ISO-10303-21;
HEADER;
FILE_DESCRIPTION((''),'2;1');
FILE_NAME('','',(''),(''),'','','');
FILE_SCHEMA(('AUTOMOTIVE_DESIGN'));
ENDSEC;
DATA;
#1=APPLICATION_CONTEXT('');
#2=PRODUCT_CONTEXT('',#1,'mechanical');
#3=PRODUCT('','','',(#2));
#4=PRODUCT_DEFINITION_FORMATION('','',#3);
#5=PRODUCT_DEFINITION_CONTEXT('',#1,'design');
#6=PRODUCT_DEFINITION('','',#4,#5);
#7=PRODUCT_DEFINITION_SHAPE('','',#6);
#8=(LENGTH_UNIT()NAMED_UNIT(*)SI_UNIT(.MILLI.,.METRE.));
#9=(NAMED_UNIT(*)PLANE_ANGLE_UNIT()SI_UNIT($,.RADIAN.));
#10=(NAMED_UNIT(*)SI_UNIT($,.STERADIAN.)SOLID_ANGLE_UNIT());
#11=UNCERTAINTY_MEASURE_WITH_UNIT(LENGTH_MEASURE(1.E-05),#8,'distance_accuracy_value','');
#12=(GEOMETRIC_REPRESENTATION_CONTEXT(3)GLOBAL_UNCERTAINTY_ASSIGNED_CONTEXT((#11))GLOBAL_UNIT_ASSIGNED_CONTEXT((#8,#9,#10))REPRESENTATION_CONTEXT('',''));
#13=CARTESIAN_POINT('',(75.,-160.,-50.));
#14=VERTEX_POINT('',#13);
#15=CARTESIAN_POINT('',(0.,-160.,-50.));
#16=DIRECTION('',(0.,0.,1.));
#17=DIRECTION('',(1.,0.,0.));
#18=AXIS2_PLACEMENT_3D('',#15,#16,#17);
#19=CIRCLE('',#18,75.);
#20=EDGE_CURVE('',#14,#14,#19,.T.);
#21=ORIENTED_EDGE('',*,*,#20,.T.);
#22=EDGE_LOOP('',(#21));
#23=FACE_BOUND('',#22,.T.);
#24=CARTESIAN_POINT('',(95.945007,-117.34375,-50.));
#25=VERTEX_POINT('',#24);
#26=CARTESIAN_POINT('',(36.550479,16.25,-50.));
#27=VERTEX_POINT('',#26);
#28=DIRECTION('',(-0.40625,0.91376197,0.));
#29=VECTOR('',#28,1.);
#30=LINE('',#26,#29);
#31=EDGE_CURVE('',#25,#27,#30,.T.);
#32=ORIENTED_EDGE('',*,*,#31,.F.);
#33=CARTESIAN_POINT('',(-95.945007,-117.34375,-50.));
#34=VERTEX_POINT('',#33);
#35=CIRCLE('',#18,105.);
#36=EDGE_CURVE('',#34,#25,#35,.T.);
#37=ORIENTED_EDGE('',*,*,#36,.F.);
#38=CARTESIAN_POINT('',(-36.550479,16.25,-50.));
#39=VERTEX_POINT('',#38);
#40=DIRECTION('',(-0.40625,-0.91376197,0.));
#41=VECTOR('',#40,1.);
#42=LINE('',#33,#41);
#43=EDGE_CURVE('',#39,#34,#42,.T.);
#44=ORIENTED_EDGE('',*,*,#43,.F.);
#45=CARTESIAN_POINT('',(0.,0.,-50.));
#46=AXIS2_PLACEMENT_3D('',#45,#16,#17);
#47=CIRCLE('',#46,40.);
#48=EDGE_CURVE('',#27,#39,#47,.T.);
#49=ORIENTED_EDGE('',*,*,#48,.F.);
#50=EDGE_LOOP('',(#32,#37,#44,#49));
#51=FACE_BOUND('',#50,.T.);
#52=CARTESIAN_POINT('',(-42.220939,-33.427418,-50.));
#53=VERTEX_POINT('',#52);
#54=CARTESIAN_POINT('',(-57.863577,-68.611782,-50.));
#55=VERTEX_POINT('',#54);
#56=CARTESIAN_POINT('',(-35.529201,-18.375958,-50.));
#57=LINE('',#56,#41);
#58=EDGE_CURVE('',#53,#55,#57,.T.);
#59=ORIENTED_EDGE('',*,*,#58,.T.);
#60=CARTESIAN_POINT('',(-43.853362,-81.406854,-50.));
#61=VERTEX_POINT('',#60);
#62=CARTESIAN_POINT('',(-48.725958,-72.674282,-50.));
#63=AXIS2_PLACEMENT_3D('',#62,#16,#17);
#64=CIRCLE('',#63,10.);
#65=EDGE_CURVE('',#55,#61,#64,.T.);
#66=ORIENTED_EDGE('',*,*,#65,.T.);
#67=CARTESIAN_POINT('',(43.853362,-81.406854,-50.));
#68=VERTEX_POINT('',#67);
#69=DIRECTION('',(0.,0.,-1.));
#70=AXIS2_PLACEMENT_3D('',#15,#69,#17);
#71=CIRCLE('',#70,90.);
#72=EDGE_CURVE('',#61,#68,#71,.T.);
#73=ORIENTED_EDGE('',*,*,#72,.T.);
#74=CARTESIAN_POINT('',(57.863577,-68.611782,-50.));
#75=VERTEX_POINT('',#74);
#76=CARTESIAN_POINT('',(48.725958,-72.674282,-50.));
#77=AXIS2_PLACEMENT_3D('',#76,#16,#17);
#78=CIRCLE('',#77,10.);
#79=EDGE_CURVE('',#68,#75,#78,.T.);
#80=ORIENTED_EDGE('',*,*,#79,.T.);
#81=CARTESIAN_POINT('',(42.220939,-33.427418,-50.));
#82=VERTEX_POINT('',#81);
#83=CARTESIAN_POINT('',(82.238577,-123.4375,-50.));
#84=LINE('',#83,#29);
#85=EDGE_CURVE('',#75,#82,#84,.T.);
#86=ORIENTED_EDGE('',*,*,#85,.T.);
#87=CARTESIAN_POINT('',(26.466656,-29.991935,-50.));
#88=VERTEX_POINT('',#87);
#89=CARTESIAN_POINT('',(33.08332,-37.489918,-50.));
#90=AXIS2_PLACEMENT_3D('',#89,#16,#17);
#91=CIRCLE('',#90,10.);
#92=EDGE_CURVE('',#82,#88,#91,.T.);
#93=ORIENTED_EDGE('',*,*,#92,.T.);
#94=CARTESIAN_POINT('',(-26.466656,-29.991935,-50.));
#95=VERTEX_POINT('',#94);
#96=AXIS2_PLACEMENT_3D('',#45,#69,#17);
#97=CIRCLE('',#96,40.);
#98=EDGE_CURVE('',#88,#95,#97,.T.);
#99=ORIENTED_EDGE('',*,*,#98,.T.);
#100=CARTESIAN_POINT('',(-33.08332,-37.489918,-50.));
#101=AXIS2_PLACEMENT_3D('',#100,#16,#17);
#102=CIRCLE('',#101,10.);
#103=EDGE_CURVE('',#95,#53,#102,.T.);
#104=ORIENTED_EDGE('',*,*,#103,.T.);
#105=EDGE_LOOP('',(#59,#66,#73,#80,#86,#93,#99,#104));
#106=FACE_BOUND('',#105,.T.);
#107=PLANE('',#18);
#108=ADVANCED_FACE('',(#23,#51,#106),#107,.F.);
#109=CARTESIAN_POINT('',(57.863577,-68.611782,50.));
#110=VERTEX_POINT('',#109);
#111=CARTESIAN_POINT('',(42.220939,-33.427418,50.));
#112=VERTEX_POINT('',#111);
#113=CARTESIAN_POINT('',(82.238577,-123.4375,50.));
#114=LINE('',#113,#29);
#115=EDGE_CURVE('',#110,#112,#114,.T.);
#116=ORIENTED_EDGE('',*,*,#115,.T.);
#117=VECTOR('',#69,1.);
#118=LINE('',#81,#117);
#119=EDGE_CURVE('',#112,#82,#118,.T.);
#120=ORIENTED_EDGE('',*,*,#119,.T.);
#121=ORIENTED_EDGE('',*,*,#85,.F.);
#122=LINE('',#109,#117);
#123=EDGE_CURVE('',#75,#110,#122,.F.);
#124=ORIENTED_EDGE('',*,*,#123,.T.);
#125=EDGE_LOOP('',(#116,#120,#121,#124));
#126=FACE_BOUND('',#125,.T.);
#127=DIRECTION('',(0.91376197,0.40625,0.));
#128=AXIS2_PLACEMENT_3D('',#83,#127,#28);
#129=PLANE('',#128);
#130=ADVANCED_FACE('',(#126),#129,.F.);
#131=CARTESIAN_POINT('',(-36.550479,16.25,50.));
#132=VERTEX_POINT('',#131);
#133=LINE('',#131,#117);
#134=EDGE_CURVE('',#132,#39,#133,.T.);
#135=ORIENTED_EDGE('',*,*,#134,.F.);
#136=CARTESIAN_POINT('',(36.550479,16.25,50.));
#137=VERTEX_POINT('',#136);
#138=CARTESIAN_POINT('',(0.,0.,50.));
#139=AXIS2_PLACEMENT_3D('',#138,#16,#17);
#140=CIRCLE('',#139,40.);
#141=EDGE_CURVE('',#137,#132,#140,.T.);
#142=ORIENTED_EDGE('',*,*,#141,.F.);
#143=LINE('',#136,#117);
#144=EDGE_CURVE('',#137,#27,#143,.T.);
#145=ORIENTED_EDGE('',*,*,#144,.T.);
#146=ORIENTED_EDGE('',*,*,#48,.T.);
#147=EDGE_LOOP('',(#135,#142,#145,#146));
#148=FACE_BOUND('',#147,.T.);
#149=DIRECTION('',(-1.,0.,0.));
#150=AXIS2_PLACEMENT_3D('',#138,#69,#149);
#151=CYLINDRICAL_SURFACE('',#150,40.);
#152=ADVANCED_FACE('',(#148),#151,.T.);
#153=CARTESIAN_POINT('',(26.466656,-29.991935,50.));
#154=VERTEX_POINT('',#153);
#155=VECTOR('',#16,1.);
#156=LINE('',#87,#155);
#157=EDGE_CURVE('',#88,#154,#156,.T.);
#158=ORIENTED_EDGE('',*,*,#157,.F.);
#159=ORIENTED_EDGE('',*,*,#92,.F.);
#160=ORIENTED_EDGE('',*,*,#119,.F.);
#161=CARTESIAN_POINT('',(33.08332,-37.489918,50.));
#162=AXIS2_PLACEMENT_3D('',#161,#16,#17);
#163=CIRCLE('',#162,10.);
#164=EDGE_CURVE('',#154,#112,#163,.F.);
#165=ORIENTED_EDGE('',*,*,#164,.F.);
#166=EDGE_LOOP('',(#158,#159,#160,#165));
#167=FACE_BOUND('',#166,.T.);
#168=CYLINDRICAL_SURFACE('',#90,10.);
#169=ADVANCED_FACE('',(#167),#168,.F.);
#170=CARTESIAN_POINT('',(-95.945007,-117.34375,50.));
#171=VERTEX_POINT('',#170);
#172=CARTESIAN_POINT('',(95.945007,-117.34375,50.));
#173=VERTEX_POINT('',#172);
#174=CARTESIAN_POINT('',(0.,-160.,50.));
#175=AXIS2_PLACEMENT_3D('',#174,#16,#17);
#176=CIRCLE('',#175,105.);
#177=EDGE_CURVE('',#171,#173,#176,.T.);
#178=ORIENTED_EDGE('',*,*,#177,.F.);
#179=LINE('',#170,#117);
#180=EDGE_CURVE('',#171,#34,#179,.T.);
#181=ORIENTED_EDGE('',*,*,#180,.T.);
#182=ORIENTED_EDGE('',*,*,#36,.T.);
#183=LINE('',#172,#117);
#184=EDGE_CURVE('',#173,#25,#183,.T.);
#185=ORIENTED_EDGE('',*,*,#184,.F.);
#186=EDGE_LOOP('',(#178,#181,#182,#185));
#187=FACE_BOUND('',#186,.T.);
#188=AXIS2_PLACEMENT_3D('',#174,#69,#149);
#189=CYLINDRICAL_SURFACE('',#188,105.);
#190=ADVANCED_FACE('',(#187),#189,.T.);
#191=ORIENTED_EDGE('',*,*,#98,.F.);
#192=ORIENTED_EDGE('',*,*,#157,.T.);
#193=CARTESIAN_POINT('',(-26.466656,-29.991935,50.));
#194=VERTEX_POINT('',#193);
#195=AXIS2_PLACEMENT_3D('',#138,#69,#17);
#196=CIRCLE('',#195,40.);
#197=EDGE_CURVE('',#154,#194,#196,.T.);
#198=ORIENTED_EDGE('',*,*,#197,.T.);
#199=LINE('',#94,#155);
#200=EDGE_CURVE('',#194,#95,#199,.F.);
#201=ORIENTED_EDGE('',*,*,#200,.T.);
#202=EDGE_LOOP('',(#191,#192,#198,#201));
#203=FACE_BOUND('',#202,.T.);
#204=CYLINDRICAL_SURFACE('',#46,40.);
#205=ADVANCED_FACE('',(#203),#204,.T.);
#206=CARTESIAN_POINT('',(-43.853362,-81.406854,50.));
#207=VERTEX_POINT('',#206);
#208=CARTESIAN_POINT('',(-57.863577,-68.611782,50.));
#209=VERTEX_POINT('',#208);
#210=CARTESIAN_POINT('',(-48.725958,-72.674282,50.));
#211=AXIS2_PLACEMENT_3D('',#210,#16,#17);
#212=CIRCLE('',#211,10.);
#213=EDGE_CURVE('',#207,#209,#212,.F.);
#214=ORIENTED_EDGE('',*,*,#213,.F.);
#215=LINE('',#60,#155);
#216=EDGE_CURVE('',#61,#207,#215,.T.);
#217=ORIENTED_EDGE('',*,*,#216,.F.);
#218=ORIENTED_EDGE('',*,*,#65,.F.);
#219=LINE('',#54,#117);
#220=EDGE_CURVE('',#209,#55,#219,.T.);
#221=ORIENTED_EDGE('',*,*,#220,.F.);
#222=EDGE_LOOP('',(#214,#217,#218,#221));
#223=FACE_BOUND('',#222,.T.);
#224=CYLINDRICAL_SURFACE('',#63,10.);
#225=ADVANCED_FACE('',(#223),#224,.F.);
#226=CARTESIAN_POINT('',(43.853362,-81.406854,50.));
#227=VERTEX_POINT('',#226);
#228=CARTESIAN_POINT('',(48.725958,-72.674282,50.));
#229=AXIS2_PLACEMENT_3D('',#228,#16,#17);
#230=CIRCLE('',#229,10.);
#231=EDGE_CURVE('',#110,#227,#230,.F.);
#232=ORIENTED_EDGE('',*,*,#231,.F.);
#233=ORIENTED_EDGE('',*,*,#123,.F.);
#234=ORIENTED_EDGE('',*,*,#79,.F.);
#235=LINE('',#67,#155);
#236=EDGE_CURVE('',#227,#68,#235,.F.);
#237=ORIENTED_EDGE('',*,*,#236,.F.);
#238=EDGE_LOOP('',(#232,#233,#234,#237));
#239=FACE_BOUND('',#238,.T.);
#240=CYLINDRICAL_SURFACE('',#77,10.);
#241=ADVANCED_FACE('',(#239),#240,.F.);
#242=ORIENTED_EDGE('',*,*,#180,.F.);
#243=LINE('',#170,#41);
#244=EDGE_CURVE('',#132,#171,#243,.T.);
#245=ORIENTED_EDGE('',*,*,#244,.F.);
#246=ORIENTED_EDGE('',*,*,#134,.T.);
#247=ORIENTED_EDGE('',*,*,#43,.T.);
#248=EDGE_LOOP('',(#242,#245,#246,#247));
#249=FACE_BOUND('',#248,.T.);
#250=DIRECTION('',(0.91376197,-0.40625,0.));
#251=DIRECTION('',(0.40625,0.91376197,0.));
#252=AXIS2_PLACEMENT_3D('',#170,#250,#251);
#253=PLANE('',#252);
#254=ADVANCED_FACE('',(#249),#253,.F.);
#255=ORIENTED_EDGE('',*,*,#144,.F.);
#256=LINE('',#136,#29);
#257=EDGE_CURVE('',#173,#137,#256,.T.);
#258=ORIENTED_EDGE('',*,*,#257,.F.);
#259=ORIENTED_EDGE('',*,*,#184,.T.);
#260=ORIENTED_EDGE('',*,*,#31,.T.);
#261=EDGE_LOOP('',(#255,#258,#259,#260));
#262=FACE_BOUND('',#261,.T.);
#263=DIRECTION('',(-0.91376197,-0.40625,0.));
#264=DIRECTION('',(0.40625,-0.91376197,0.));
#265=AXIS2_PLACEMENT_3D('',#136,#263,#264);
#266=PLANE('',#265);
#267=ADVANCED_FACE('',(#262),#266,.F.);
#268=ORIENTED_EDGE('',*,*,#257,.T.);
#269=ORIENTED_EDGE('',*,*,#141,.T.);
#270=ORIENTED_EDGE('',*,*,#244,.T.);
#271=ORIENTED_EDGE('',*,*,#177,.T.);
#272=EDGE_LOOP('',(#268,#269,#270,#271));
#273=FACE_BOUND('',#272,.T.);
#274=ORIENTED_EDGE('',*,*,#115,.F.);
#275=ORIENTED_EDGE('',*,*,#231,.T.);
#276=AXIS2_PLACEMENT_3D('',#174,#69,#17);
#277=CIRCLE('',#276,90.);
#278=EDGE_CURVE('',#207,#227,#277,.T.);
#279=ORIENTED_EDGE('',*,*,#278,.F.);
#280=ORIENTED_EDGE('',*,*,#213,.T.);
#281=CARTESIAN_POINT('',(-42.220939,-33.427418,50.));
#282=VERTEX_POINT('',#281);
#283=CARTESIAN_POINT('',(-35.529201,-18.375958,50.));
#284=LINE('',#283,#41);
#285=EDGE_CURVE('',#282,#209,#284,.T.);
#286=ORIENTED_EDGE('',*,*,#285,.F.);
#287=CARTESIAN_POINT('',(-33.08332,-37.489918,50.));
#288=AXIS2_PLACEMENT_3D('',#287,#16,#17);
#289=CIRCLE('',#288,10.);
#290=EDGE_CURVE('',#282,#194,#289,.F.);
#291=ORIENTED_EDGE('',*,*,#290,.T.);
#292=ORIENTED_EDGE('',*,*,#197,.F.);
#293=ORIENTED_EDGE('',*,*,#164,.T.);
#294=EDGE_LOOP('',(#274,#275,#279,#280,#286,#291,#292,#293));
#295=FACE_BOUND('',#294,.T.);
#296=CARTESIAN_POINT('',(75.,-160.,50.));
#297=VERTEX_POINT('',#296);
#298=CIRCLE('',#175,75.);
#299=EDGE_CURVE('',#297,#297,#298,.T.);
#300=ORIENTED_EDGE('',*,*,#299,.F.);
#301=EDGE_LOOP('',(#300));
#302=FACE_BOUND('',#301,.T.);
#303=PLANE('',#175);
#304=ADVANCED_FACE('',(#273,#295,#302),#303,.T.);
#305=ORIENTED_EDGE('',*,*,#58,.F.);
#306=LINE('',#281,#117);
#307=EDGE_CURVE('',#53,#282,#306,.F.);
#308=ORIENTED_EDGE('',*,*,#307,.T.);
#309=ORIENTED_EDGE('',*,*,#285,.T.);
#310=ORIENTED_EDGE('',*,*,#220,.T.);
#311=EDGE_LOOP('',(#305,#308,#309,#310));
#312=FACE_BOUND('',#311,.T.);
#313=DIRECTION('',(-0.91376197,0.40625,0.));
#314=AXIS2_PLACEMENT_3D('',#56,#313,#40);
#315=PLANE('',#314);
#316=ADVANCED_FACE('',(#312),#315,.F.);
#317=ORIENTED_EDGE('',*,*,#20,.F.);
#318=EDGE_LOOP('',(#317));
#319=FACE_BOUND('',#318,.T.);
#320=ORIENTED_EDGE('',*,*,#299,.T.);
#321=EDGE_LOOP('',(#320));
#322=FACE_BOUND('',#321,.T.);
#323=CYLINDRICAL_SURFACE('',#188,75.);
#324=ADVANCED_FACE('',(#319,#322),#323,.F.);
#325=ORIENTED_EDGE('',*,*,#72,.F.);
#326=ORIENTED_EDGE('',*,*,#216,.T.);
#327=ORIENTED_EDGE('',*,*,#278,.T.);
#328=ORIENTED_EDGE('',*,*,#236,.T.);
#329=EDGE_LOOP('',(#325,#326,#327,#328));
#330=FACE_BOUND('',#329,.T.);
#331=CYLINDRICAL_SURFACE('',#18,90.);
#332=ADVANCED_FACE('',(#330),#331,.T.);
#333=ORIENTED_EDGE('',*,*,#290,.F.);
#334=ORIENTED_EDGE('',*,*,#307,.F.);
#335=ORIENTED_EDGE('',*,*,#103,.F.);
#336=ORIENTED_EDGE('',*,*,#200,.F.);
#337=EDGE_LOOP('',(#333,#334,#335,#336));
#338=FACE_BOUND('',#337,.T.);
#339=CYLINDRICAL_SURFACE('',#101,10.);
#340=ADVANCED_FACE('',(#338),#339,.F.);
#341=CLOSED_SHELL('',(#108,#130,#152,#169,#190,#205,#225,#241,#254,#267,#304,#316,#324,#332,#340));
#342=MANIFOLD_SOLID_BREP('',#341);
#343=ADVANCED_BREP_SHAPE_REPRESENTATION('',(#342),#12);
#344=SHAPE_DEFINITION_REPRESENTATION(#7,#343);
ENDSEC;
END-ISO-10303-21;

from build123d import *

# Parameters (mm, degrees)
SKETCH1_R               = 75
BOSS_EXTRUDE1_DEPTH     = 50
CUT_EXTRUDE1_DEPTH      = 290.39592257
CUT_EXTRUDE1_DEPTH_BACK = 290.39592257
FILLET1_START           = -50
FILLET1_DEPTH           = 100


with BuildPart() as part:
    # Sketch1 → Boss-Extrude1 (new, symmetric)
    with BuildSketch(Plane.XY):
        with BuildLine():
            Line((-95.945006832, -117.34375), (-36.550478793, 16.25))
            ThreePointArc((-36.550478793, 16.25), (0, 40), (36.550478793, 16.25))
            Line((36.550478793, 16.25), (95.945006832, -117.34375))
            ThreePointArc((95.945006832, -117.34375), (0, -265), (-95.945006832, -117.34375))
        make_face()
        with Locations((0, -160)):
            Circle(SKETCH1_R, mode=Mode.SUBTRACT)
    extrude(amount=BOSS_EXTRUDE1_DEPTH, both=True)

    # Sketch2 → Cut-Extrude1 (cut, two sides: drawn at the far end of the back side and taken through both)
    with BuildSketch(Plane.XY.offset(-CUT_EXTRUDE1_DEPTH_BACK)):
        with BuildLine():
            Line((-35.52920143, -18.375958363), (-82.238577284, -123.4375))
            ThreePointArc((-82.238577284, -123.4375), (0, -70), (82.238577284, -123.4375))
            Line((82.238577284, -123.4375), (35.52920143, -18.375958363))
            ThreePointArc((35.52920143, -18.375958363), (0, -40), (-35.52920143, -18.375958363))
        make_face()
    extrude(amount=CUT_EXTRUDE1_DEPTH + CUT_EXTRUDE1_DEPTH_BACK, mode=Mode.SUBTRACT)

    # Fillet1: read off the stored shape, not the designer's step
    # Fillet1 outline → Fillet1 (add)
    with BuildSketch(Plane.XY.offset(FILLET1_START)):
        with BuildLine():
            ThreePointArc((-42.220939274, -33.427418189), (-35.213916082, -27.719526256), (-26.466655661, -29.991934551))
            ThreePointArc((-26.466655661, -29.991934551), (-31.537347698, -24.604790188), (-35.52920143, -18.375958363))
            Line((-35.52920143, -18.375958363), (-42.220939274, -33.427418189))
        make_face()
        with BuildLine():
            ThreePointArc((35.52920143, -18.375958363), (31.537347698, -24.604790188), (26.466655661, -29.991934551))
            ThreePointArc((26.466655661, -29.991934551), (35.213916082, -27.719526256), (42.220939274, -33.427418189))
            Line((42.220939274, -33.427418189), (35.52920143, -18.375958363))
        make_face()
        with BuildLine():
            ThreePointArc((-43.853361827, -81.406853629), (-55.469552548, -80.058313703), (-57.863577284, -68.61178181))
            Line((-57.863577284, -68.61178181), (-82.238577284, -123.4375))
            ThreePointArc((-82.238577284, -123.4375), (-66.45628703, -99.30764534), (-43.853361827, -81.406853629))
        make_face()
        with BuildLine():
            Line((82.238577284, -123.4375), (57.863577284, -68.61178181))
            ThreePointArc((57.863577284, -68.61178181), (55.469552548, -80.058313703), (43.853361827, -81.406853629))
            ThreePointArc((43.853361827, -81.406853629), (66.45628703, -99.30764534), (82.238577284, -123.4375))
        make_face()
    extrude(amount=FILLET1_DEPTH)


solid = part.part
